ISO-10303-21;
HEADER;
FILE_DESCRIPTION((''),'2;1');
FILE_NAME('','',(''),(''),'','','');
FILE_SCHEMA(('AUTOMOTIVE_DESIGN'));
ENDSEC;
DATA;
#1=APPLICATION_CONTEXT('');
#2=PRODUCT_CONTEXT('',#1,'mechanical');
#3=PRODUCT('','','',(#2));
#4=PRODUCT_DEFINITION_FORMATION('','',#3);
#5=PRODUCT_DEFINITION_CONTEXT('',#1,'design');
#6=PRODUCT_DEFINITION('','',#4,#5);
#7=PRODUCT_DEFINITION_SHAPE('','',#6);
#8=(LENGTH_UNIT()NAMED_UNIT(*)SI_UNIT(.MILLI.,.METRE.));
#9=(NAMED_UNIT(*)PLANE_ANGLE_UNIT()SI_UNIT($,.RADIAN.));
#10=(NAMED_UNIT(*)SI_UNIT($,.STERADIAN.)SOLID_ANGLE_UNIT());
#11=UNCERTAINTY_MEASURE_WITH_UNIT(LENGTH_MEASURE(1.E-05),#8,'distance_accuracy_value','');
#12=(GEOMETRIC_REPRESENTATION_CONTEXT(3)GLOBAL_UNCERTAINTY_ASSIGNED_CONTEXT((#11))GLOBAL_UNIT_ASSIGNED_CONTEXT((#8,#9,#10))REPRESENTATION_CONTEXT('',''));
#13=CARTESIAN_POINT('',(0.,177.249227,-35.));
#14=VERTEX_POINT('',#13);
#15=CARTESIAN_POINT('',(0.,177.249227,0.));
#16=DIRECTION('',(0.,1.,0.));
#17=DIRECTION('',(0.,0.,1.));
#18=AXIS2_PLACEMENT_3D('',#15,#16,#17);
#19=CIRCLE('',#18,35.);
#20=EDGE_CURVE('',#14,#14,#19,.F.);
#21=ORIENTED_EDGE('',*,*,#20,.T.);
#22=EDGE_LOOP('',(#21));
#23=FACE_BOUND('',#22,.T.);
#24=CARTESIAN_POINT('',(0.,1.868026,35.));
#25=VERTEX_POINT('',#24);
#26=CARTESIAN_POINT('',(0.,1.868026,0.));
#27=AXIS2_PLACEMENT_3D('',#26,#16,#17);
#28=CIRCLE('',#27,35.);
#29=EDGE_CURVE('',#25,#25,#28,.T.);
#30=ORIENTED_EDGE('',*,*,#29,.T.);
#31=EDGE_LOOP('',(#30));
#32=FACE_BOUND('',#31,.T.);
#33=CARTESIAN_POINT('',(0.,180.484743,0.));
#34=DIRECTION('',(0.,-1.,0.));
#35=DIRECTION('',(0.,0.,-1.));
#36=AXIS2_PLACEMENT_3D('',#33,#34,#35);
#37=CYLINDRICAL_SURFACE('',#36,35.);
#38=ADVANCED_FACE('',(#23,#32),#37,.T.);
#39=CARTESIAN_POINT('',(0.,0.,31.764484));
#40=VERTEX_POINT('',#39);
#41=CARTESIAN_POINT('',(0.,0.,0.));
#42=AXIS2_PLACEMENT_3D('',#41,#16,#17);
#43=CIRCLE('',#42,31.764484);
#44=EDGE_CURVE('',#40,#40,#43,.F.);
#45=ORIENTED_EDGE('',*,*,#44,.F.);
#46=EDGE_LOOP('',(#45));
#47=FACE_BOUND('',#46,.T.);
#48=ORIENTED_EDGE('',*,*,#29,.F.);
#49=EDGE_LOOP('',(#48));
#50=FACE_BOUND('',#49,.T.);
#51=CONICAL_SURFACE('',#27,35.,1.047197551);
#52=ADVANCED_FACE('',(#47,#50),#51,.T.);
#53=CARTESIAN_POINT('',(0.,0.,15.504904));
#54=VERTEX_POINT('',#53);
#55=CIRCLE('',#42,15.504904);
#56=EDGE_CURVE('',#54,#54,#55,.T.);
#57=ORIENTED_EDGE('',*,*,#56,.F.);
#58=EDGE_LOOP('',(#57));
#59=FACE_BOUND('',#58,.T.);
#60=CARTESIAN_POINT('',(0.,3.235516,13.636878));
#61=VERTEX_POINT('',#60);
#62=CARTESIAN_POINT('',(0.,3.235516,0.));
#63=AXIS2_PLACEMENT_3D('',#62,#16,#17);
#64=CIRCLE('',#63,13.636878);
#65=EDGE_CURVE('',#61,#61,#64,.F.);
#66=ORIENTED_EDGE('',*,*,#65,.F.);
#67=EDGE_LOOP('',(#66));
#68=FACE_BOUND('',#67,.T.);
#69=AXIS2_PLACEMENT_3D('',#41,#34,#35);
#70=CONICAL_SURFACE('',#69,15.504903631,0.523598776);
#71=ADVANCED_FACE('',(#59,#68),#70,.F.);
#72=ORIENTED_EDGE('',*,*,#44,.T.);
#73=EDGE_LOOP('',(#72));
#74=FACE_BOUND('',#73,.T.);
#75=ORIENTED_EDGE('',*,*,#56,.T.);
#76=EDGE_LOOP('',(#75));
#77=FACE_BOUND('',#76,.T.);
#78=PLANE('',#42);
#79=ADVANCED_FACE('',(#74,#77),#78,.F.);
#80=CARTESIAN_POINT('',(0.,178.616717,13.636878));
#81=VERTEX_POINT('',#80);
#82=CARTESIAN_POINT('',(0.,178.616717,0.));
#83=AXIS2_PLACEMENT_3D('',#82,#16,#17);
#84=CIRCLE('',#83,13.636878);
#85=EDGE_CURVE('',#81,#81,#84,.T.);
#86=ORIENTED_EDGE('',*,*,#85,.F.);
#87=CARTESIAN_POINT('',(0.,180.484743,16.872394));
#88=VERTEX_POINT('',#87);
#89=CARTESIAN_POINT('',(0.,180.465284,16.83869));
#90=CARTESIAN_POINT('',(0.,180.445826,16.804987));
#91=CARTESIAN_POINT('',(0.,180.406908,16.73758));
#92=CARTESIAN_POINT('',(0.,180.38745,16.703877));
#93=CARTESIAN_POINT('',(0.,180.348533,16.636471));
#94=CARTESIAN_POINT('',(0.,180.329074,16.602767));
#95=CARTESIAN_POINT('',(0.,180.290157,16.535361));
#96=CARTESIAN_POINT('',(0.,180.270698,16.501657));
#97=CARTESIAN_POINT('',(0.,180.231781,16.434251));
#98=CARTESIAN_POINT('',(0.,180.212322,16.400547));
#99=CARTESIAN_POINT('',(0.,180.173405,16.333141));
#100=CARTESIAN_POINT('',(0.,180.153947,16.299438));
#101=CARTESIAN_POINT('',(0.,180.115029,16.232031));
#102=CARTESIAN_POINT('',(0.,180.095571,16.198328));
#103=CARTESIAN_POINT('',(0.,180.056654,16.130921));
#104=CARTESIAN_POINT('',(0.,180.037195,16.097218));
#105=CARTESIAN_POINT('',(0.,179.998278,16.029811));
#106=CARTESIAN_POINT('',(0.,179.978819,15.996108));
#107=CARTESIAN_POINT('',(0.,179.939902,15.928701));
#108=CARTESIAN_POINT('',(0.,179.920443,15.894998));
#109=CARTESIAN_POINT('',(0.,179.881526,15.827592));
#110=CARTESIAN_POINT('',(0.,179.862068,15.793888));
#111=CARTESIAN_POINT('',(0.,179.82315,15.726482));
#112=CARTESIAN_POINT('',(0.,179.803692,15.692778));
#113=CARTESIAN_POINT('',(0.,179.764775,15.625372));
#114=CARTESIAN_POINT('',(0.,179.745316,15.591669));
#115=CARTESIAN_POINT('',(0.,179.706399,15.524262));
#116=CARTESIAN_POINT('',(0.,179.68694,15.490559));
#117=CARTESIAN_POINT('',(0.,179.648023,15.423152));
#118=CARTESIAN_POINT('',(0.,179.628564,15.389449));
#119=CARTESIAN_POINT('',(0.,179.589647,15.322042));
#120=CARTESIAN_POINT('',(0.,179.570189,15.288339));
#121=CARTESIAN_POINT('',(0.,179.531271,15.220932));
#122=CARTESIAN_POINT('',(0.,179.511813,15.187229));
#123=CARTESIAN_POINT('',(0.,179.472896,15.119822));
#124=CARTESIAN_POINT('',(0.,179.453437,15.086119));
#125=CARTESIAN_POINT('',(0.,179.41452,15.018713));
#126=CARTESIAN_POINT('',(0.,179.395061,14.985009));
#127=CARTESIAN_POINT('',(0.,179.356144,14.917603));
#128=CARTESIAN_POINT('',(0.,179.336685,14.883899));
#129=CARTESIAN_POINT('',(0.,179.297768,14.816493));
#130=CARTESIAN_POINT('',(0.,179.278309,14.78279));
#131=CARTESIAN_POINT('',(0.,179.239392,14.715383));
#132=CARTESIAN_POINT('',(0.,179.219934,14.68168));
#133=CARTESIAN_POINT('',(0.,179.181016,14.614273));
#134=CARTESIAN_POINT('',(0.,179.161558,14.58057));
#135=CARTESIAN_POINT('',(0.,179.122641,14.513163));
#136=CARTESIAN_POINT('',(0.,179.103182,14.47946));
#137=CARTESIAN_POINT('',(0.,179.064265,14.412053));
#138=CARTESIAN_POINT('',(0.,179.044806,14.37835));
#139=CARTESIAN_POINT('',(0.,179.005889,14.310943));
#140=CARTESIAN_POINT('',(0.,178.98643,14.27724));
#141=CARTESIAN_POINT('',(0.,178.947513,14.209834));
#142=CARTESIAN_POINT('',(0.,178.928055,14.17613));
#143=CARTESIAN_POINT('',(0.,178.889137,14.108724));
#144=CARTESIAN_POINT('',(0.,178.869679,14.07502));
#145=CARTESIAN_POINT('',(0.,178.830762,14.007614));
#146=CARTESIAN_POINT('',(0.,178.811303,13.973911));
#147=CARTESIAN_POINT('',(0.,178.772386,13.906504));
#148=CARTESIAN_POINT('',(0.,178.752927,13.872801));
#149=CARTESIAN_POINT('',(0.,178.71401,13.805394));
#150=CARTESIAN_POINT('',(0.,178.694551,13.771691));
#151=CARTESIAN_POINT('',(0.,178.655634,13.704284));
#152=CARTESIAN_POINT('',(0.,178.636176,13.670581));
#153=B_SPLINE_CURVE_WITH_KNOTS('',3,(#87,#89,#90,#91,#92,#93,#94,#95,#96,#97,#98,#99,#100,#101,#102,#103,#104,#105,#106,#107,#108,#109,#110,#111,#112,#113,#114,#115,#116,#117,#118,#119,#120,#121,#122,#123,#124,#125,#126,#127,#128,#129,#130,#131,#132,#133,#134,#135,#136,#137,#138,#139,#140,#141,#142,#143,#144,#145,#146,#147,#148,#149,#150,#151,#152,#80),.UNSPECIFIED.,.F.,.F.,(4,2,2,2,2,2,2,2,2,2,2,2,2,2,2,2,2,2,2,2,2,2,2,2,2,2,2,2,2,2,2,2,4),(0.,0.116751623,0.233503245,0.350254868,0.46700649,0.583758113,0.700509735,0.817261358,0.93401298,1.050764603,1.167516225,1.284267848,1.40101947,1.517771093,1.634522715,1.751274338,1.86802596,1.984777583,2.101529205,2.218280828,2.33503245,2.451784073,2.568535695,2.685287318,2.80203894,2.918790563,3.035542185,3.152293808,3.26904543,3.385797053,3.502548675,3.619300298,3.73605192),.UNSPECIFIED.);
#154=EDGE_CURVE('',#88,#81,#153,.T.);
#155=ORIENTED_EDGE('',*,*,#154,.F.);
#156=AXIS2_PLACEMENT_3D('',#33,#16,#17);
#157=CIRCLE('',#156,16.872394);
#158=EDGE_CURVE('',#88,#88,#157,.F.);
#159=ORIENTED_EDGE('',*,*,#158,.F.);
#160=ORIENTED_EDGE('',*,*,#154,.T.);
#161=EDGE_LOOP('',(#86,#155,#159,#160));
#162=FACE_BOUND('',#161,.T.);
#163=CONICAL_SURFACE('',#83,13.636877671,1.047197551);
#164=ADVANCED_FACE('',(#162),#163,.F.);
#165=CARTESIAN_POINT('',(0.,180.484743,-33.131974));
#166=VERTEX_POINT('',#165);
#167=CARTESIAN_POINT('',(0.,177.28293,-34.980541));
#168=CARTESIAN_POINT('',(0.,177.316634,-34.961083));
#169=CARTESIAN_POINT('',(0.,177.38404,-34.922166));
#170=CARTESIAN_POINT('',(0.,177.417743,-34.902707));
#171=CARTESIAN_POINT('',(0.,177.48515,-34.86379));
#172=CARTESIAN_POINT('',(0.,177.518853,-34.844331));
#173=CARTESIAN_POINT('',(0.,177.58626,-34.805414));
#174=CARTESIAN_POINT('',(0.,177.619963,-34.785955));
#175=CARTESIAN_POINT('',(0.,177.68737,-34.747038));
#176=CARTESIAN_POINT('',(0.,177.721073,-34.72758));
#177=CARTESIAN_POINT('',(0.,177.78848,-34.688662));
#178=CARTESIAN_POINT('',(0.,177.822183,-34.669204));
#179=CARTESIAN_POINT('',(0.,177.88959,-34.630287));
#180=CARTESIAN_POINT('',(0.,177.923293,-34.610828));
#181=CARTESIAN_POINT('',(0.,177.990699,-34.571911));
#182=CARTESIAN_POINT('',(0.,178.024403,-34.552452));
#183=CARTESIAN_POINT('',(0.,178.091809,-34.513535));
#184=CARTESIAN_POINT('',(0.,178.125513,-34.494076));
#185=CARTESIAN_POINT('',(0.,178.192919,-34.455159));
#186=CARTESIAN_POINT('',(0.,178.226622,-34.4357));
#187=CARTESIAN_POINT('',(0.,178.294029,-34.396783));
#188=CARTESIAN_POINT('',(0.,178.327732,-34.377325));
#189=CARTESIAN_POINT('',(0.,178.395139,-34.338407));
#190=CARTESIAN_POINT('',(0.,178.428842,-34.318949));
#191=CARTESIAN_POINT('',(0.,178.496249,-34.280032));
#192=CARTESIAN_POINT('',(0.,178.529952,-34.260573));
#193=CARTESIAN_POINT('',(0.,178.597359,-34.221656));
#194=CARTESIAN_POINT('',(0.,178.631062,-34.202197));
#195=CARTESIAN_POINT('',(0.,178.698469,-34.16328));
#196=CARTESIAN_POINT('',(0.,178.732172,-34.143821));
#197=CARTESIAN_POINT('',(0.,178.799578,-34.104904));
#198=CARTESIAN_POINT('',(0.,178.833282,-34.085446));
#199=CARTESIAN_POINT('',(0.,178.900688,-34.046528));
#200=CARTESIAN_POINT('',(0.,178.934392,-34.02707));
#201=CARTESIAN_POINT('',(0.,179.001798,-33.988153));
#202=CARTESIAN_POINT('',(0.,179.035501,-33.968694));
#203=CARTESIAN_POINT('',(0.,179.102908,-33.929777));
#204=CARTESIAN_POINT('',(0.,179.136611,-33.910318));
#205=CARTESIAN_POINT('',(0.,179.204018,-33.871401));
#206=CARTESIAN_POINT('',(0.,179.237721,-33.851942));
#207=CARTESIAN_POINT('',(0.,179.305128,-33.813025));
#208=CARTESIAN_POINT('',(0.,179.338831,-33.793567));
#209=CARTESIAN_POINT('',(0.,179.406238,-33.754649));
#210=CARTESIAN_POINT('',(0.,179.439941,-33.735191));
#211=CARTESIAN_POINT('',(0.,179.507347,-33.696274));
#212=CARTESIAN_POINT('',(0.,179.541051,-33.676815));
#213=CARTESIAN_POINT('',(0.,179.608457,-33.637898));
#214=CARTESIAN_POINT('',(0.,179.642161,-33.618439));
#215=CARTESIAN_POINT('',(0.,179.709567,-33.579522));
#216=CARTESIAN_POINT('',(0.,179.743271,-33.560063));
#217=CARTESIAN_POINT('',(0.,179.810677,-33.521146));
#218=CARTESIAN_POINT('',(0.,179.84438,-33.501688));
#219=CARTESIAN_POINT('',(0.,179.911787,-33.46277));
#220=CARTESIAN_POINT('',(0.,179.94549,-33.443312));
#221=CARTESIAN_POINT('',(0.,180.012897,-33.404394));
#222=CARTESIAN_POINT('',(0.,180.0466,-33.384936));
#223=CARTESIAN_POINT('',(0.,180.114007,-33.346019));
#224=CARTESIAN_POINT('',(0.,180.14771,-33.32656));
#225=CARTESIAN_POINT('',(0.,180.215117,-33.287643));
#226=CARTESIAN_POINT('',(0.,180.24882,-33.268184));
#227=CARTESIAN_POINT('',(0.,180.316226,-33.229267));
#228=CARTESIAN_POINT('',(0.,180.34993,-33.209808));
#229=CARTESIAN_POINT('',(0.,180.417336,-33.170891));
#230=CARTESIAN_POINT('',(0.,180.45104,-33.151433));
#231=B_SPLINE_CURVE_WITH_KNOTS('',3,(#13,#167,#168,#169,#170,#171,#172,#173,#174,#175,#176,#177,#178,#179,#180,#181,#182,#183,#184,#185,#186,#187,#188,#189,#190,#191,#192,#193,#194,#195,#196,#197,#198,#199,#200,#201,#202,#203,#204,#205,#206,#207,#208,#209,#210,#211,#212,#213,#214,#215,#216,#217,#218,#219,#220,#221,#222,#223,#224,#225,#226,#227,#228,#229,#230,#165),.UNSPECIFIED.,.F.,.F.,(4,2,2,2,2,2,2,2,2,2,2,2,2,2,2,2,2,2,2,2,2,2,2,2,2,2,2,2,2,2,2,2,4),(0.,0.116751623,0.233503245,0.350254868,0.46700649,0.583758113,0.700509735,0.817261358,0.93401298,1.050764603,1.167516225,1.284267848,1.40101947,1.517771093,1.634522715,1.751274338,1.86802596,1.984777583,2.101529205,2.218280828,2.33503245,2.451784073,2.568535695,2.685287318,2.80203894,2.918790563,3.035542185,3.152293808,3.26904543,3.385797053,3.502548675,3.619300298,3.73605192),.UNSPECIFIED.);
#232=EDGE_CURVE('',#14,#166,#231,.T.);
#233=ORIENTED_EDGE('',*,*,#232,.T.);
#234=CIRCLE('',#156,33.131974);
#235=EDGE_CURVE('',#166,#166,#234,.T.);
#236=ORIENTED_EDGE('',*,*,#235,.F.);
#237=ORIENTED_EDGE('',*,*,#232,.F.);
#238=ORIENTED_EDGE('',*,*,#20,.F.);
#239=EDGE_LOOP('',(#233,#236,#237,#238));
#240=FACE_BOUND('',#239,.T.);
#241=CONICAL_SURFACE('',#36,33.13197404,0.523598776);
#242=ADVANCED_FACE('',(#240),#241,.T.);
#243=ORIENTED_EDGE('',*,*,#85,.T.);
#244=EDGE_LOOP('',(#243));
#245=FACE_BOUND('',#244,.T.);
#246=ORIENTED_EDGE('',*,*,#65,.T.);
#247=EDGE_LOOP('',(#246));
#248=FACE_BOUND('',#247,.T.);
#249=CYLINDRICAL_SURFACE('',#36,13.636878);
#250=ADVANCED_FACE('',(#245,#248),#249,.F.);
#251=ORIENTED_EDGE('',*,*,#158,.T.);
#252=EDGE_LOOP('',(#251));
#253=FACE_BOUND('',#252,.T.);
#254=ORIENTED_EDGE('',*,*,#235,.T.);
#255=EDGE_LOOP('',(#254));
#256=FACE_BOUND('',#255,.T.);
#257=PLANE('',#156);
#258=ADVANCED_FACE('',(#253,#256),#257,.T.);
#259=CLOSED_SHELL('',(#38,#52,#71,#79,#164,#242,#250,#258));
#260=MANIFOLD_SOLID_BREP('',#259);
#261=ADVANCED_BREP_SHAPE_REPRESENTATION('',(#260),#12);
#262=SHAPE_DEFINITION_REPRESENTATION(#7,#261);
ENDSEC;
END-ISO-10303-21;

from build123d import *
from OCP.BRepFilletAPI import BRepFilletAPI_MakeChamfer

# Parameters (mm, degrees)
SKETCH1_R           = 35
BOSS_EXTRUDE1_DEPTH = 180.484742914
SKETCH2_R           = 13.636877671
CUT_EXTRUDE1_DEPTH  = 188.148984567
CHAMFER1_SIZE       = 3.235515873
CHAMFER1_SIZE2      = 1.86802596


with BuildPart() as part:
    # Sketch1 → Boss-Extrude1 (new body)
    with BuildSketch(Plane(origin=(0, 0, 0), x_dir=(1, 0, 0), z_dir=(0, 1, 0))):
        Circle(SKETCH1_R)
    extrude(amount=BOSS_EXTRUDE1_DEPTH)

    # Sketch2 → Cut-Extrude1 (cut, through all)
    with BuildSketch(Plane(origin=(0, 0, 0), x_dir=(1, 0, 0), z_dir=(0, 1, 0))):
        Circle(SKETCH2_R)
    extrude(amount=CUT_EXTRUDE1_DEPTH, mode=Mode.SUBTRACT)

    # Chamfer1: one chamfer whose edges measure the first distance from different faces: ONE call of the kernel's chamfer builder (chamfer() names one face for all edges)
    chamfer1_edges_1 = [part.edges().sort_by_distance(p)[0] for p in [
        (-13.636877671, 180.484742914, 0),
    ]]
    chamfer1_side_1 = [part.faces().sort_by_distance(p)[0] for p in [
        (-34.010050506, 180.484742914, 0),
    ]]
    chamfer1_edges_2 = [part.edges().sort_by_distance(p)[0] for p in [
        (-13.636877671, 0, 0),
    ]]
    chamfer1_side_2 = [part.faces().sort_by_distance(p)[0] for p in [
        (-13.636877671, 90.242371457, 0),
    ]]
    chamfer1_edges_3 = [part.edges().sort_by_distance(p)[0] for p in [
        (-35, 0, 0),
    ]]
    chamfer1_side_3 = [part.faces().sort_by_distance(p)[0] for p in [
        (-34.010050506, 0, 0),
    ]]
    chamfer1_edges_4 = [part.edges().sort_by_distance(p)[0] for p in [
        (-35, 180.484742914, 0),
    ]]
    chamfer1_side_4 = [part.faces().sort_by_distance(p)[0] for p in [
        (-35, 90.242371457, 0),
    ]]
    chamfer1 = BRepFilletAPI_MakeChamfer(part.part.solid().wrapped)
    for e in chamfer1_edges_1:
        chamfer1.Add(CHAMFER1_SIZE, CHAMFER1_SIZE2, e.wrapped, chamfer1_side_1[0].wrapped)  # the first distance lies on this face
    for e in chamfer1_edges_2:
        chamfer1.Add(CHAMFER1_SIZE, CHAMFER1_SIZE2, e.wrapped, chamfer1_side_2[0].wrapped)  # the first distance lies on this face
    for e in chamfer1_edges_3:
        chamfer1.Add(CHAMFER1_SIZE, CHAMFER1_SIZE2, e.wrapped, chamfer1_side_3[0].wrapped)  # the first distance lies on this face
    for e in chamfer1_edges_4:
        chamfer1.Add(CHAMFER1_SIZE, CHAMFER1_SIZE2, e.wrapped, chamfer1_side_4[0].wrapped)  # the first distance lies on this face
    add(Compound.cast(chamfer1.Shape()), mode=Mode.REPLACE)


solid = part.part
